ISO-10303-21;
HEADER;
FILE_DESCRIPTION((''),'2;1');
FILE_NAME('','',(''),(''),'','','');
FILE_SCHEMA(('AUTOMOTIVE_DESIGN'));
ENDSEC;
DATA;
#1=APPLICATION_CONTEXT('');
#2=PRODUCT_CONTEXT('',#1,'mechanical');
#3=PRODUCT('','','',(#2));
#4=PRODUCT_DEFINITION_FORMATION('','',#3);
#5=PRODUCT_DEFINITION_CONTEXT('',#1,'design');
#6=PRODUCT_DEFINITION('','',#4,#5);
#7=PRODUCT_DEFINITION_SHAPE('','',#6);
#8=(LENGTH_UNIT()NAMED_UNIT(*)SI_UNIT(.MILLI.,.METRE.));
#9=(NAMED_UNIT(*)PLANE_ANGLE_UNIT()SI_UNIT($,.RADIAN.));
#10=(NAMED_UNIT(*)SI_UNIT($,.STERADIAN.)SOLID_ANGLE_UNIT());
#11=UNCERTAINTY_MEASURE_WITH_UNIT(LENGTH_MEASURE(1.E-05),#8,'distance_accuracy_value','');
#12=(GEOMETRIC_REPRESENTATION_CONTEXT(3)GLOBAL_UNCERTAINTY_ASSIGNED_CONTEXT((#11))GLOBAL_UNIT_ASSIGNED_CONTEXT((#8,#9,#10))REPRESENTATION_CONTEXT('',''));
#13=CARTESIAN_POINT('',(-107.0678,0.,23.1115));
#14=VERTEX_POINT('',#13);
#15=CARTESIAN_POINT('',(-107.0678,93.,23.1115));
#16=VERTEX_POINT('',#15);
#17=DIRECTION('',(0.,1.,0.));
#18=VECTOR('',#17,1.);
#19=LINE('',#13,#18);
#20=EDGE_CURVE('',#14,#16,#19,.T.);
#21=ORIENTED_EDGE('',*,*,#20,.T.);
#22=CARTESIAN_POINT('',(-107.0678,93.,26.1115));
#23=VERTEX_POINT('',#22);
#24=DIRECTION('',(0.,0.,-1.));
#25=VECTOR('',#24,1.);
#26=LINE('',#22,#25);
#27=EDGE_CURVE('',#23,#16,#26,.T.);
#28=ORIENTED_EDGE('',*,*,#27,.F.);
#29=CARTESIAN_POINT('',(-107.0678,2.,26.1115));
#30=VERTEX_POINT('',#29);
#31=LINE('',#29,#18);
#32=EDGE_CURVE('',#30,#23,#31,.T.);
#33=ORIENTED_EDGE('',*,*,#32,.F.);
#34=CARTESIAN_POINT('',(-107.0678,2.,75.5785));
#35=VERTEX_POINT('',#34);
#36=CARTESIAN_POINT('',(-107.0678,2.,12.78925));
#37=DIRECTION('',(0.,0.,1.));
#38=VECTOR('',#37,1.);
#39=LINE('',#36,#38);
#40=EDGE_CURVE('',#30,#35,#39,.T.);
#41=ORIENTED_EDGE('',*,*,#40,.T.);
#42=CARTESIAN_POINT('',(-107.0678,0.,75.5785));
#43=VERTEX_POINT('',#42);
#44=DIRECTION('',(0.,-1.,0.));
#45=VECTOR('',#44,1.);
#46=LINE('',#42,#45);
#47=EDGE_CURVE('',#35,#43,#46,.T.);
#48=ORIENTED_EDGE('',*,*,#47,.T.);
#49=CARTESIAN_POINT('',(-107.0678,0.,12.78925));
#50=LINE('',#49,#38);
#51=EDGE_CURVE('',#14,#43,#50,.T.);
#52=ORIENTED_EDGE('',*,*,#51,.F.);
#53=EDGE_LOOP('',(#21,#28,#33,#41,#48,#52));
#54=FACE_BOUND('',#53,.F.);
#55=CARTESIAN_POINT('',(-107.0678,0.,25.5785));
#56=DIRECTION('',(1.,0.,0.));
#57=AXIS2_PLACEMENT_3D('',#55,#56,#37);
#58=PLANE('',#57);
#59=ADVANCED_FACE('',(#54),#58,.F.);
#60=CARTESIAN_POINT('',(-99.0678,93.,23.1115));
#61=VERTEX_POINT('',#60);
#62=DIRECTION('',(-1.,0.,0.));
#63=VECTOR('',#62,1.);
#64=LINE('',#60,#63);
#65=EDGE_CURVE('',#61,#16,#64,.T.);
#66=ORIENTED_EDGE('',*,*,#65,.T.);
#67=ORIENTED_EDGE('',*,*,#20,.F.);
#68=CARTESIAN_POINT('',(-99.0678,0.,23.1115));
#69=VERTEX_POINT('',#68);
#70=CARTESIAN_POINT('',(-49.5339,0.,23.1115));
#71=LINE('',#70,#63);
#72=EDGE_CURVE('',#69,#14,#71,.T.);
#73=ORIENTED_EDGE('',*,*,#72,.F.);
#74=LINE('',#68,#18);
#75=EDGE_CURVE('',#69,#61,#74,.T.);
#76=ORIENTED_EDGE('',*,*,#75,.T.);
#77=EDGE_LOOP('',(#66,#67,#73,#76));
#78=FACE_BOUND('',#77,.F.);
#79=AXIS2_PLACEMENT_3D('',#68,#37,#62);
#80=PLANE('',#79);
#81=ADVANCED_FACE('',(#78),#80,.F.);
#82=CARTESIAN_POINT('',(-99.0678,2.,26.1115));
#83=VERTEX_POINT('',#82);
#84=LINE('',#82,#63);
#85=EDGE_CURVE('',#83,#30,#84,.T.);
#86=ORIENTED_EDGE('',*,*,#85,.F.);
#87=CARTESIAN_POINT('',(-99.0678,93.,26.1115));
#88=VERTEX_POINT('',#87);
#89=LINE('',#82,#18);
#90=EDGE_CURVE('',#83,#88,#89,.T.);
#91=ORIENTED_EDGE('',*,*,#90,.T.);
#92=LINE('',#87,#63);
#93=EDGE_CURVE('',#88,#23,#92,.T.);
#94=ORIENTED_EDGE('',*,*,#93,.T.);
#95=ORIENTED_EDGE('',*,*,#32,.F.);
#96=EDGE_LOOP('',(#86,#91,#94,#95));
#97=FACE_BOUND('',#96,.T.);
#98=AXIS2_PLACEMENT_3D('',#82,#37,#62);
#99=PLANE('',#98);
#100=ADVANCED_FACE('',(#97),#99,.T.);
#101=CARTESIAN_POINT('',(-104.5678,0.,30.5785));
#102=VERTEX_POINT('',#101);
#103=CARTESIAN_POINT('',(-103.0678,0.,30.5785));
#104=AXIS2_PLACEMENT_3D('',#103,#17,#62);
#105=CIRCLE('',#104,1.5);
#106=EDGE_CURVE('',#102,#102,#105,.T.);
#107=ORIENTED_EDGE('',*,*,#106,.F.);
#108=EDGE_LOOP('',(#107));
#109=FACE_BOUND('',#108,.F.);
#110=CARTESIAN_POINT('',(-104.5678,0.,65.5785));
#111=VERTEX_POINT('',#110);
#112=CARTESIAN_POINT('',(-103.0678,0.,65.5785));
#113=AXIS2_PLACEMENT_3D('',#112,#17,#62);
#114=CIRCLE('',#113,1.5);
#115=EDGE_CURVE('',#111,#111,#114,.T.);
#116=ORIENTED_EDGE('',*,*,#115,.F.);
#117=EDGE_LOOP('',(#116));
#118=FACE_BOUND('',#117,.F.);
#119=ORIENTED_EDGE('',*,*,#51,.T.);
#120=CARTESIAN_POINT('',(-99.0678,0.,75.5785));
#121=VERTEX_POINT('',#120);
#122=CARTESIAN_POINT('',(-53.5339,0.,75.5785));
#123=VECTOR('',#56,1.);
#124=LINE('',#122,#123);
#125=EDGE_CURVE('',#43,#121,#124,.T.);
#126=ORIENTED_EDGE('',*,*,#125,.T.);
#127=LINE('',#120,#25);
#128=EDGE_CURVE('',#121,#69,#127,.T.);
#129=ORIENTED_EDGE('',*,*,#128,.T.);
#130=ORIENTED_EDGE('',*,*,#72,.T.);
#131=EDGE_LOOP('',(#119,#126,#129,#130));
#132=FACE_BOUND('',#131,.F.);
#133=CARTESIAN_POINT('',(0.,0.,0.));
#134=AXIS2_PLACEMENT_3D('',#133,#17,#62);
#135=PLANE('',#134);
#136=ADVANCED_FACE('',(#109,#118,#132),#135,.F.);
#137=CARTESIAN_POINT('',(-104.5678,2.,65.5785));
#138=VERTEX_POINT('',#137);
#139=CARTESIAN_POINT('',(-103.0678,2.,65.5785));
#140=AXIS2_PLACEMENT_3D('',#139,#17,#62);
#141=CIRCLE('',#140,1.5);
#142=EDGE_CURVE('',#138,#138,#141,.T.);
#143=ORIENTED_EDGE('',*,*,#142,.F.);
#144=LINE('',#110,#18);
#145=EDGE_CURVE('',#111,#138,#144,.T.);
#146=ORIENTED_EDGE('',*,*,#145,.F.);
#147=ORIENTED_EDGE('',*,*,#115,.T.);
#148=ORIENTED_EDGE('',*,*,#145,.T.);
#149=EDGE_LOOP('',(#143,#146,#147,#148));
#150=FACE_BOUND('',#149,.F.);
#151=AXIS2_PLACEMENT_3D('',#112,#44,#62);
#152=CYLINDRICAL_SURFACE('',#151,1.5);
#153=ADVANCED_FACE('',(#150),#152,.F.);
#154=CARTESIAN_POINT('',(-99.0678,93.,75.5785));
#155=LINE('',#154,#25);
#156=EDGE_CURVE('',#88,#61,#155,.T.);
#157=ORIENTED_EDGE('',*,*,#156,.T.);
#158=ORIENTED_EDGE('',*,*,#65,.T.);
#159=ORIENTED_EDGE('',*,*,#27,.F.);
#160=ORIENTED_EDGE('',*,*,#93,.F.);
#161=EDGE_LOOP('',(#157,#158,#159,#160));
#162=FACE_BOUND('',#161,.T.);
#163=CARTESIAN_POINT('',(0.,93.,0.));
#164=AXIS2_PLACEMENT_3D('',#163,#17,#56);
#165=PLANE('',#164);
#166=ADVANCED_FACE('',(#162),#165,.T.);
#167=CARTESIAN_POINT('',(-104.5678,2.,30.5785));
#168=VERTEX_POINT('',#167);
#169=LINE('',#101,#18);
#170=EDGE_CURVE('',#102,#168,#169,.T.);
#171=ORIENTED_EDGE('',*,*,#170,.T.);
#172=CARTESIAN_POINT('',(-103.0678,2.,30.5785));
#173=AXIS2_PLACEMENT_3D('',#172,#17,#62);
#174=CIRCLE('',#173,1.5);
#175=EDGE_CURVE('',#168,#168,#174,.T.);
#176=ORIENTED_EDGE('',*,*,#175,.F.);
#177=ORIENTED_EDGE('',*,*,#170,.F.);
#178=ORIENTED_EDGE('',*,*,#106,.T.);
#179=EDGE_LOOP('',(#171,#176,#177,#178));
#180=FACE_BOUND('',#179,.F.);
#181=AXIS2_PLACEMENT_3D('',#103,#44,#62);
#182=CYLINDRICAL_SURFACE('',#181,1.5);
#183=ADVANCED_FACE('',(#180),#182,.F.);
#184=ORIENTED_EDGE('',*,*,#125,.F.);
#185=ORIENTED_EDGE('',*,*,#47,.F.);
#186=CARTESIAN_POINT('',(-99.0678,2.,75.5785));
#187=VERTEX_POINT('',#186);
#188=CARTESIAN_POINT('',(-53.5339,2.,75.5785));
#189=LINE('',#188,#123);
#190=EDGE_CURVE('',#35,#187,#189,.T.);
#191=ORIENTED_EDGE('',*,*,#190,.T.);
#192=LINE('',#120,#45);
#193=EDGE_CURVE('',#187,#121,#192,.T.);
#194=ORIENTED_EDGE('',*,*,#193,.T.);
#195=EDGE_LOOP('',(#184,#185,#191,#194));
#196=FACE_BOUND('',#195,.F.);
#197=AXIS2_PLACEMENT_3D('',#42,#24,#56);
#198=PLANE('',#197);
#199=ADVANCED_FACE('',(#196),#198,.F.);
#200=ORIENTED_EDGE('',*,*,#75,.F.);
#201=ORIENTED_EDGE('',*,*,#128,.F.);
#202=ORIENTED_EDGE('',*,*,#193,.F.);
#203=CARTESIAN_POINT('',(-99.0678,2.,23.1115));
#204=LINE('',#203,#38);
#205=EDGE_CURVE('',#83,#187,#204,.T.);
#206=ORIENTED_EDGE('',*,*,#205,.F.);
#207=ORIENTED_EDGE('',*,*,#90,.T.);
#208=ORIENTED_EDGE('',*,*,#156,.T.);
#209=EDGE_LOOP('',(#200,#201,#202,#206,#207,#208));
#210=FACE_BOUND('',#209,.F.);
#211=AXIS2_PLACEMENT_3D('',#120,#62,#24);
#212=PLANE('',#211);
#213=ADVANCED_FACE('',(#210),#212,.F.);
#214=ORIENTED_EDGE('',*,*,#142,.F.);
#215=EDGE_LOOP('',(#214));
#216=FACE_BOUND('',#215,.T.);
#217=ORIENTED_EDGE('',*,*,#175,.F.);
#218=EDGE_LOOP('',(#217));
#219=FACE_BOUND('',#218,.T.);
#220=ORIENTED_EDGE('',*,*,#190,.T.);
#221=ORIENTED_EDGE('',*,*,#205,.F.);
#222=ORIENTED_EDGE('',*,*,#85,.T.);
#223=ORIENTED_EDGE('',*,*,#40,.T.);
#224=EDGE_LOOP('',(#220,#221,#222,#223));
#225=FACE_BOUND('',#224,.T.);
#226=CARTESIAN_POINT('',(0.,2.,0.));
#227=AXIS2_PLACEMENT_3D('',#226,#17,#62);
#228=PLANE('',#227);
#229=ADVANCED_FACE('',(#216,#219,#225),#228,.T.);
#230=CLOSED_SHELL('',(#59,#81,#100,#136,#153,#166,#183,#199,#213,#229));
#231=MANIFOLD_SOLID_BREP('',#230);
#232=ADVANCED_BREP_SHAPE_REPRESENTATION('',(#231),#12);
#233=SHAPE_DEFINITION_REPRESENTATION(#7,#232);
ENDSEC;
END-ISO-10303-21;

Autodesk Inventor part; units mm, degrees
ref_plane "YZ Plane" through (0, 0, 0) normal (1, 0, 0) x (0, 1, 0)
ref_plane "XZ Plane" through (0, 0, 0) normal (0, 1, 0) x (-1, 0, 0)
ref_plane "XY Plane" through (0, 0, 0) normal (0, 0, 1) x (1, 0, 0)
sketch "Boceto1" plane through (0, 0, 0) normal (0, 1, 0) x (-1, 0, 0)
  line L0 (112.646, 23.1115) -> (33.646, 23.1115)
  circle A0 centre (89.8586, 65.5785) radius 1.5
  circle A1 centre (89.8586, 65.5785) radius 1.5
  circle A2 centre (103.0678, 65.5785) radius 1.5
  line L1 (103.0678, 65.5785) -> (103.0678, 30.5785)
  circle A3 centre (103.0678, 30.5785) radius 1.5
  line L2 (103.0678, 30.5785) -> (99.0678, 30.5785)
  line L3 (99.0678, 30.5785) -> (99.0678, 25.5785)
  line L4 (99.0678, 25.5785) -> (107.0678, 25.5785)
  line L5 (107.0678, 25.5785) -> (107.0678, 75.5785)
  line L6 (107.0678, 75.5785) -> (99.0678, 75.5785)
  line L7 (99.0678, 75.5785) -> (99.0678, 25.5785)
  point P0 (0, 0)
  dimension "d0" = 35
  dimension "d1" = 3
  dimension "d2" = 4
  dimension "d3" = 5
  dimension "d4" = 8
  dimension "d5" = 50
extrude "Extrusión1" add sketch "Boceto1" along normal blind 2 contours L7 L6 L5 L4 L3
thicken "Engrosado1" operation add thickness 2.467 both sides no extend neighbours yes toward (0, 0, -1) faces at (-101.7345, 0.6667, 25.5785)
sketch "Boceto2" plane through (0, 2, 0) normal (0, 1, 0) x (1, 0, 0)
  line L0 (-99.0678, -23.1115) -> (-107.0678, -23.1115) projected
  line L1 (-99.0678, -75.5785) -> (-99.0678, -23.1115) projected
  line L2 (-107.0678, -23.1115) -> (-99.0678, -23.1115)
  line L3 (-99.0678, -23.1115) -> (-99.0678, -26.1115)
  line L4 (-99.0678, -26.1115) -> (-107.0678, -26.1115)
  line L5 (-107.0678, -26.1115) -> (-107.0678, -23.1115)
  point P0 (0, 0)
  dimension "d10" = 3
extrude "Extrusión2" add sketch "Boceto2" along normal blind 91
properties part number "soporte3pantalla"
